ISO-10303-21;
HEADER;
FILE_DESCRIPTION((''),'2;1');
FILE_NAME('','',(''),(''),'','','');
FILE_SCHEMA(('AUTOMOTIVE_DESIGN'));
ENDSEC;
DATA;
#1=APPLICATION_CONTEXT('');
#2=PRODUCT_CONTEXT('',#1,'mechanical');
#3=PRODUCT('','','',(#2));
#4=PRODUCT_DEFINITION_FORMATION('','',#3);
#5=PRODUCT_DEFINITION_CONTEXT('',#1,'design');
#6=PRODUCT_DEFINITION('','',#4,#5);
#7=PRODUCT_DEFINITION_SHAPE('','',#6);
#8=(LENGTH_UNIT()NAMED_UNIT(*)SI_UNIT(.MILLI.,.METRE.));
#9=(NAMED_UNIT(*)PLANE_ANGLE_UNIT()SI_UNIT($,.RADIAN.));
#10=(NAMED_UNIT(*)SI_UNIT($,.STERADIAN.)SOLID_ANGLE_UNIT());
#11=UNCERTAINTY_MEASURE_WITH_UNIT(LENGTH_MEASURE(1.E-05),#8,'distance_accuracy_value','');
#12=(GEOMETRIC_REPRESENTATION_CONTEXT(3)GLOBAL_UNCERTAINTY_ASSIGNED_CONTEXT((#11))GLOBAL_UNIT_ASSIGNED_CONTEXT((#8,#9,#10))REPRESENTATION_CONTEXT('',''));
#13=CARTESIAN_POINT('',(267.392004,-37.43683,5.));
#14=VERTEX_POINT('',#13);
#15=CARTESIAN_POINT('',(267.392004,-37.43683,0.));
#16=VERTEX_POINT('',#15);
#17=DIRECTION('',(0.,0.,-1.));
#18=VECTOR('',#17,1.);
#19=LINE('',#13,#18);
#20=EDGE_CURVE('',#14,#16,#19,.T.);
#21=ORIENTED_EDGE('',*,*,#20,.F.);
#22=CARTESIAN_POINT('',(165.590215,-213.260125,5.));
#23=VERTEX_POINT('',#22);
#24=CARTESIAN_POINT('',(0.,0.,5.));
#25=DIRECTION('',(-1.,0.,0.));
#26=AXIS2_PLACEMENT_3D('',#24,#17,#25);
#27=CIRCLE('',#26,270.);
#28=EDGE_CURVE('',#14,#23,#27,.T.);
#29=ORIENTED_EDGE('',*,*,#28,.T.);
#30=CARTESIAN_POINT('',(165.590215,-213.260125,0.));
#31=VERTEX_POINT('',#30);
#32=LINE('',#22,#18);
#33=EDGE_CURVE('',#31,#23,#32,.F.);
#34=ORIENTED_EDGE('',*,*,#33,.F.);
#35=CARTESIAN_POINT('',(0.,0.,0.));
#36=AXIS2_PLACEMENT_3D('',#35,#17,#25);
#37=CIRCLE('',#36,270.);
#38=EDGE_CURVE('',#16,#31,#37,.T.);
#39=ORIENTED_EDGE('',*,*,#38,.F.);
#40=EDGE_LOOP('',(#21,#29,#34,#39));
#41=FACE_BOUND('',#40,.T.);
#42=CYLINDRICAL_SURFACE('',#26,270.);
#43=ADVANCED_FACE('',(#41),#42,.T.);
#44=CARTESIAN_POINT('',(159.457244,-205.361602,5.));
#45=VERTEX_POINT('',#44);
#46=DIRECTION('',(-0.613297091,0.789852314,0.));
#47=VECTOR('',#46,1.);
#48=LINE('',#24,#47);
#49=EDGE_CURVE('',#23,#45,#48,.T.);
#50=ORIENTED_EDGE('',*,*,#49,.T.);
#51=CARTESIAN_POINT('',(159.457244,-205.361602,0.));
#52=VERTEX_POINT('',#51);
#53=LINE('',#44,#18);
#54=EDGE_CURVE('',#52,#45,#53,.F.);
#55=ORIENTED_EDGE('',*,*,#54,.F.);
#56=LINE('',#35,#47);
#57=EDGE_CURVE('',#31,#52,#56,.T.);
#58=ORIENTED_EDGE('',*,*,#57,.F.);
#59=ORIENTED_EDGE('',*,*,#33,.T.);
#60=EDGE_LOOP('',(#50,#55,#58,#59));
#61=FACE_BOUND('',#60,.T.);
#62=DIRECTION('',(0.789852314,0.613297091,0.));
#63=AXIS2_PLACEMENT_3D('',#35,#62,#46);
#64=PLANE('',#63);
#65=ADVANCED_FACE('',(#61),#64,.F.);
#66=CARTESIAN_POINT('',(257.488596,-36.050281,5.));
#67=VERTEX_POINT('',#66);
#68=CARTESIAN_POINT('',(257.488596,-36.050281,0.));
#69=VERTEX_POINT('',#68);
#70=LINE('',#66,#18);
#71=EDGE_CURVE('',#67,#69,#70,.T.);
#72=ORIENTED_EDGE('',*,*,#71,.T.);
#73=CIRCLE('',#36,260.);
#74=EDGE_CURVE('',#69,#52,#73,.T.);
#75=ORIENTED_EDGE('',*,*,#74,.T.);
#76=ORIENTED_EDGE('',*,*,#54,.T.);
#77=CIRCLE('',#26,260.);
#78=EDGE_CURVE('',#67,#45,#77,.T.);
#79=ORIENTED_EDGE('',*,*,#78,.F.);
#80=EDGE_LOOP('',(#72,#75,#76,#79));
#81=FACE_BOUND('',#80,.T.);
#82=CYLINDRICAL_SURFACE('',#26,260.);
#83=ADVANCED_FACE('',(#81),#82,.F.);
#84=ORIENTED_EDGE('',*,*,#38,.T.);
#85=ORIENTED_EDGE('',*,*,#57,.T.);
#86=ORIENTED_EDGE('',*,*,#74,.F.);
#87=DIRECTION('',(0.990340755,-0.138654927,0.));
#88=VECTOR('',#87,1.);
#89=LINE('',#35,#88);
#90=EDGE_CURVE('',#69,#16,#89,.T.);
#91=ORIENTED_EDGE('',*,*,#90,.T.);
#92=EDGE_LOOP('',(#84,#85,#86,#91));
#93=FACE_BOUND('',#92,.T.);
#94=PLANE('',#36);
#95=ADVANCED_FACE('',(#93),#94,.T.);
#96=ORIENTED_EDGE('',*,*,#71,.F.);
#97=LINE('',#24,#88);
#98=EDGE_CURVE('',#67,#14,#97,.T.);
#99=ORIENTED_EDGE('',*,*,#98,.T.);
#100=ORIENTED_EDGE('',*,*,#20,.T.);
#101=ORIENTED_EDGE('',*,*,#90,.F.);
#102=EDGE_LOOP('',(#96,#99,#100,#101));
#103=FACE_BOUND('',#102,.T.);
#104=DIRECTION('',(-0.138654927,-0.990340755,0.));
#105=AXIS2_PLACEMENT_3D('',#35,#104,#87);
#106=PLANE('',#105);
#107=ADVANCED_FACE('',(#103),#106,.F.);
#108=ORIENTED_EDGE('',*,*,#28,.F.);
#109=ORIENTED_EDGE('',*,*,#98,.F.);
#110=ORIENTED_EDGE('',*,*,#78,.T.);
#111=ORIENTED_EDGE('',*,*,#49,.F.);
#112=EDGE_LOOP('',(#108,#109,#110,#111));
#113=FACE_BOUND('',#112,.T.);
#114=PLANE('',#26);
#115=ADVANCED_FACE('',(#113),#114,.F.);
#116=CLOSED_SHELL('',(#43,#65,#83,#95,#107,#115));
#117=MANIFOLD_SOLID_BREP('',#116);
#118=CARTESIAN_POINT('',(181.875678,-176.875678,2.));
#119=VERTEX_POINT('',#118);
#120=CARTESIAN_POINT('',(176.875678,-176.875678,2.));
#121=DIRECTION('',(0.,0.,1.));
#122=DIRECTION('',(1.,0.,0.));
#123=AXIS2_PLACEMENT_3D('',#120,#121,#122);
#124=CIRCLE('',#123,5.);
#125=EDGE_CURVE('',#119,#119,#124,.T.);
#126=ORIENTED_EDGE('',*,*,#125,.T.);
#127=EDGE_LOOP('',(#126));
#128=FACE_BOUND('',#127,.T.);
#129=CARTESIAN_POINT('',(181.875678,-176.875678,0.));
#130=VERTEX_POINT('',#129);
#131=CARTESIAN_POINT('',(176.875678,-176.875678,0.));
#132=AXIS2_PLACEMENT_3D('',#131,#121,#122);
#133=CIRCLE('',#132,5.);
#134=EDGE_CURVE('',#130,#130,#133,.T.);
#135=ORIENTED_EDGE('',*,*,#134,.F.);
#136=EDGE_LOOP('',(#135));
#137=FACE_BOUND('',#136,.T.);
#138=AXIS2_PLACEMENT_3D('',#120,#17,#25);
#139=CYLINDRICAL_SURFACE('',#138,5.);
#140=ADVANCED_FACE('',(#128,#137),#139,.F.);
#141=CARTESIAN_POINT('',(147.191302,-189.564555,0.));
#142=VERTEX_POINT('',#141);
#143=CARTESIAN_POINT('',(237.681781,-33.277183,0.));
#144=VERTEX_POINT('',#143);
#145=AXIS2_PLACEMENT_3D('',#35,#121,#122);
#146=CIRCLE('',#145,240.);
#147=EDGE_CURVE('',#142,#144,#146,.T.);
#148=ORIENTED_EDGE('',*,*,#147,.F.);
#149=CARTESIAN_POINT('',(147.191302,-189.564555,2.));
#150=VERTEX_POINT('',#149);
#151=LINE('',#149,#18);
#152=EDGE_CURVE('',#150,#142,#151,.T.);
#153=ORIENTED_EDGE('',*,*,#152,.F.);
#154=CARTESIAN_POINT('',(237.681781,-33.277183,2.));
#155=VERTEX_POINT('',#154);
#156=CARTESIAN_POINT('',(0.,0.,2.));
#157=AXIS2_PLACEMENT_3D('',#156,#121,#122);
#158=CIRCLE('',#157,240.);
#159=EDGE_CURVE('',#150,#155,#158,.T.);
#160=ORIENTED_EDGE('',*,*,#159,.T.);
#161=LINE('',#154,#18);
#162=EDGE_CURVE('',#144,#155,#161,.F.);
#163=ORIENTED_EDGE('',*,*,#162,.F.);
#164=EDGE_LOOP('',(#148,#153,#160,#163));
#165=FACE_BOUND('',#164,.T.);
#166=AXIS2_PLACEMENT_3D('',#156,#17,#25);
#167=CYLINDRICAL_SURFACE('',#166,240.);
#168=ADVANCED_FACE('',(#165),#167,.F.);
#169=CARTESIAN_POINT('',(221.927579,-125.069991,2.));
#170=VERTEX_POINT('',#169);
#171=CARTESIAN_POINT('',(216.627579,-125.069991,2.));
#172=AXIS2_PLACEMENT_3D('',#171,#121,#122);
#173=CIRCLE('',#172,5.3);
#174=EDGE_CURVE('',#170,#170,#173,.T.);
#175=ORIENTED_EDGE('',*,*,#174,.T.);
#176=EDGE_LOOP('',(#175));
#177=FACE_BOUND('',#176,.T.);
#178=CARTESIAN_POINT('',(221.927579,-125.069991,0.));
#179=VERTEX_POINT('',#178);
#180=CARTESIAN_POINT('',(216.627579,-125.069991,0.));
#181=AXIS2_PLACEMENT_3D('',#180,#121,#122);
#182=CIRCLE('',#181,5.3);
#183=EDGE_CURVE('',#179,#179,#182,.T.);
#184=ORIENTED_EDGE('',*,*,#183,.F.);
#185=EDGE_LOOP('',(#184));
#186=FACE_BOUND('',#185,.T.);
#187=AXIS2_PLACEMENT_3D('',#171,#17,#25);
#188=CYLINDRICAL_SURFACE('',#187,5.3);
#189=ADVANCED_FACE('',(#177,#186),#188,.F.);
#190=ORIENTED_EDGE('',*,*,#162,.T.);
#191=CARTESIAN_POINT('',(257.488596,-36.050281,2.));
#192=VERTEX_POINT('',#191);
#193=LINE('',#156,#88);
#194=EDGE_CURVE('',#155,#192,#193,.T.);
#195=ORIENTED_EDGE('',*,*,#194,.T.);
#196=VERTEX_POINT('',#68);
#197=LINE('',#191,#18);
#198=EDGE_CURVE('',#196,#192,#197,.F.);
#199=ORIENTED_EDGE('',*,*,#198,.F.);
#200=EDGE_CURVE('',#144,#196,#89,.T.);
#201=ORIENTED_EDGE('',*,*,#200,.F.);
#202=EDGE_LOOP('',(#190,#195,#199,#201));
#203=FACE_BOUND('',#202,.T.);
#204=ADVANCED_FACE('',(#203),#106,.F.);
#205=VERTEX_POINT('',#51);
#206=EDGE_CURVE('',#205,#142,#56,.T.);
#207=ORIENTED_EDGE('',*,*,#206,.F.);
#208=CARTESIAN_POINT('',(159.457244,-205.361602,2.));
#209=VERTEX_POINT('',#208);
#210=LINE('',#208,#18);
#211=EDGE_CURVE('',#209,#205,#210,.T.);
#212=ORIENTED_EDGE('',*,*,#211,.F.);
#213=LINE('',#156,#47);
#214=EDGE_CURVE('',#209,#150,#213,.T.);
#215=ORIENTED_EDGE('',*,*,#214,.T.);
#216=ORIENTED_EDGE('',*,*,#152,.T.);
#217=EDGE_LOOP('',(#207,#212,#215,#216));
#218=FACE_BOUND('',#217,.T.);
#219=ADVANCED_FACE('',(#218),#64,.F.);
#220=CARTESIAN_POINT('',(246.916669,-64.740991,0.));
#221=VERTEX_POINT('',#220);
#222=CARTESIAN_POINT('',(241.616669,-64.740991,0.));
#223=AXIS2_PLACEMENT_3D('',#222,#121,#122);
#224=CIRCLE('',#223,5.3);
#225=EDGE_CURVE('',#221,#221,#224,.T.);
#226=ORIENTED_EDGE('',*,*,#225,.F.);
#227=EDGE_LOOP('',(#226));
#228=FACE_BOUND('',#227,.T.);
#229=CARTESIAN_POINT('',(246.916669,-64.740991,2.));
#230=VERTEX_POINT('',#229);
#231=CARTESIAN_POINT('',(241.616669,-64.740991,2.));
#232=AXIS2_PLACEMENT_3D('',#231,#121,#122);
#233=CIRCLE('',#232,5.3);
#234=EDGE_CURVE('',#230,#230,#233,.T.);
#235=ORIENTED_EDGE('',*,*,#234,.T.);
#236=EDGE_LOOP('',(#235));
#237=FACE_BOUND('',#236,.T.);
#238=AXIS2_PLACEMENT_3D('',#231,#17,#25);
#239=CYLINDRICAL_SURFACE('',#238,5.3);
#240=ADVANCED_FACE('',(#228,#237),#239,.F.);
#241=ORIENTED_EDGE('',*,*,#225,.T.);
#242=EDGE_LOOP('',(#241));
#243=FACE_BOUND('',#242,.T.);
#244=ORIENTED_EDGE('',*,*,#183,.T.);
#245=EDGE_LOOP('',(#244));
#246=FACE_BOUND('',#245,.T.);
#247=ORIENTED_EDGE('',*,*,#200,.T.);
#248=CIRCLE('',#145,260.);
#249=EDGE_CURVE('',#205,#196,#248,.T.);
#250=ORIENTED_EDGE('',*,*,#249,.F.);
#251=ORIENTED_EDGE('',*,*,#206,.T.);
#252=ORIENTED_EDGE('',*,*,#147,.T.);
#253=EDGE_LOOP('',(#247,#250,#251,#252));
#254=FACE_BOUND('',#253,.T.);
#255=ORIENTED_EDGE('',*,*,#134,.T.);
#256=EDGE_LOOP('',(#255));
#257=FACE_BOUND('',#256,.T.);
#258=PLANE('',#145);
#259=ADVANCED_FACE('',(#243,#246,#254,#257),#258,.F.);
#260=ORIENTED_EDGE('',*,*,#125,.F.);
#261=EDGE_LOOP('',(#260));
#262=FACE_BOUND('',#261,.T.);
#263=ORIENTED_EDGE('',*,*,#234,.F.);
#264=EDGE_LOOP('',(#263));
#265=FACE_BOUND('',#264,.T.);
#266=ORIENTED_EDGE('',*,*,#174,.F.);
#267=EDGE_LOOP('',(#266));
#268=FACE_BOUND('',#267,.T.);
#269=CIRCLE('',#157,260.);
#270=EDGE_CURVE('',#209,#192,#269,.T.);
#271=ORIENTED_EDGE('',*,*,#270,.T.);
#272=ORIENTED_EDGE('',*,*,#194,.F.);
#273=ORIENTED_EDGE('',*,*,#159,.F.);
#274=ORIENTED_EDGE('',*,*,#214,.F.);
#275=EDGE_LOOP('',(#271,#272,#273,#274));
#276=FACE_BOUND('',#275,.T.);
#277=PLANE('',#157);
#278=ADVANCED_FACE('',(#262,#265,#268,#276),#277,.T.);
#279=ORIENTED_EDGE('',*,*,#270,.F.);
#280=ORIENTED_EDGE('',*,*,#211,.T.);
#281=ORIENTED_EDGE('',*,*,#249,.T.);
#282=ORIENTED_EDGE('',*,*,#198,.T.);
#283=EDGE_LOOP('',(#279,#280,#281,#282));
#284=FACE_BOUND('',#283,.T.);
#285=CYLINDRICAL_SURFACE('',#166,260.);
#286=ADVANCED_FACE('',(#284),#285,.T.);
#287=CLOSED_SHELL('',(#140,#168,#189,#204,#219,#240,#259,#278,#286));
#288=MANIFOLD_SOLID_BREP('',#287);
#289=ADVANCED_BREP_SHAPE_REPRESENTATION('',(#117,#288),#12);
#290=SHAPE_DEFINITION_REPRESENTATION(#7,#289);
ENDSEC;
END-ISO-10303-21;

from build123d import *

# Parameters (mm, degrees)
SALIENTE_EXTRUIR1_OUTLINE_R   = 260
SALIENTE_EXTRUIR1_OUTLINE_R_2 = 5
SALIENTE_EXTRUIR1_OUTLINE_R_3 = 5.3
SALIENTE_EXTRUIR1_OUTLINE_R_4 = 240
SALIENTE_EXTRUIR1_DEPTH       = 2
CROQUIS4_R                    = 270
CROQUIS4_R_2                  = 260
SALIENTE_EXTRUIR2_DEPTH       = 5
CORTAR_EXTRUIR6_DEPTH         = 5


# Read off the part's stored shape, not the designer's step: Saliente-Extruir1
with BuildPart() as part:
    # Saliente-Extruir1 outline → Saliente-Extruir1 (new body)
    with BuildSketch(Plane.XY):
        Circle(SALIENTE_EXTRUIR1_OUTLINE_R)
        with Locations((176.875677676, -176.875677676)):
            Circle(SALIENTE_EXTRUIR1_OUTLINE_R_2, mode=Mode.SUBTRACT)
        with Locations((216.627579108, -125.069991112)):
            Circle(SALIENTE_EXTRUIR1_OUTLINE_R_3, mode=Mode.SUBTRACT)
        with Locations((241.616669018, -64.740991341)):
            Circle(SALIENTE_EXTRUIR1_OUTLINE_R_3, mode=Mode.SUBTRACT)
        Circle(SALIENTE_EXTRUIR1_OUTLINE_R_4, mode=Mode.SUBTRACT)
        with Locations((250.139982224, 0)):
            Circle(SALIENTE_EXTRUIR1_OUTLINE_R_3, mode=Mode.SUBTRACT)
    extrude(amount=SALIENTE_EXTRUIR1_DEPTH)


with BuildPart() as body_2:
    # Croquis4 → Saliente-Extruir2 (new body)
    with BuildSketch(Plane(origin=(0, 0, 0), x_dir=(-1, 0, 0), z_dir=(0, 0, -1))):
        Circle(CROQUIS4_R)
        Circle(CROQUIS4_R_2, mode=Mode.SUBTRACT)
    extrude(amount=-SALIENTE_EXTRUIR2_DEPTH)


with BuildPart() as cortar_extruir6_tool:
    # Croquis6 → Cortar-Extruir6 (new body)
    with BuildSketch(Plane.XY.offset(5)):
        Polygon((0, 0), (344.486187081, -443.656453058), (-54.282671904, -619.031239208), (-747.430636211, -376.847010715), (-569.968054988, 500.026920035), (311.081465909, 596.065493403), (741.167250991, 61.58995466), (694.934547582, -97.295904018), align=None)
    extrude(amount=-CORTAR_EXTRUIR6_DEPTH)


with BuildPart() as part_1:
    add(part.part)

    # Cortar-Extruir6: cut by cortar_extruir6_tool
    add(cortar_extruir6_tool.part, mode=Mode.SUBTRACT)


with BuildPart() as body_2_1:
    add(body_2.part)

    # Cortar-Extruir6: cut by cortar_extruir6_tool
    add(cortar_extruir6_tool.part, mode=Mode.SUBTRACT)


solid = Compound([part_1.part, body_2_1.part])
